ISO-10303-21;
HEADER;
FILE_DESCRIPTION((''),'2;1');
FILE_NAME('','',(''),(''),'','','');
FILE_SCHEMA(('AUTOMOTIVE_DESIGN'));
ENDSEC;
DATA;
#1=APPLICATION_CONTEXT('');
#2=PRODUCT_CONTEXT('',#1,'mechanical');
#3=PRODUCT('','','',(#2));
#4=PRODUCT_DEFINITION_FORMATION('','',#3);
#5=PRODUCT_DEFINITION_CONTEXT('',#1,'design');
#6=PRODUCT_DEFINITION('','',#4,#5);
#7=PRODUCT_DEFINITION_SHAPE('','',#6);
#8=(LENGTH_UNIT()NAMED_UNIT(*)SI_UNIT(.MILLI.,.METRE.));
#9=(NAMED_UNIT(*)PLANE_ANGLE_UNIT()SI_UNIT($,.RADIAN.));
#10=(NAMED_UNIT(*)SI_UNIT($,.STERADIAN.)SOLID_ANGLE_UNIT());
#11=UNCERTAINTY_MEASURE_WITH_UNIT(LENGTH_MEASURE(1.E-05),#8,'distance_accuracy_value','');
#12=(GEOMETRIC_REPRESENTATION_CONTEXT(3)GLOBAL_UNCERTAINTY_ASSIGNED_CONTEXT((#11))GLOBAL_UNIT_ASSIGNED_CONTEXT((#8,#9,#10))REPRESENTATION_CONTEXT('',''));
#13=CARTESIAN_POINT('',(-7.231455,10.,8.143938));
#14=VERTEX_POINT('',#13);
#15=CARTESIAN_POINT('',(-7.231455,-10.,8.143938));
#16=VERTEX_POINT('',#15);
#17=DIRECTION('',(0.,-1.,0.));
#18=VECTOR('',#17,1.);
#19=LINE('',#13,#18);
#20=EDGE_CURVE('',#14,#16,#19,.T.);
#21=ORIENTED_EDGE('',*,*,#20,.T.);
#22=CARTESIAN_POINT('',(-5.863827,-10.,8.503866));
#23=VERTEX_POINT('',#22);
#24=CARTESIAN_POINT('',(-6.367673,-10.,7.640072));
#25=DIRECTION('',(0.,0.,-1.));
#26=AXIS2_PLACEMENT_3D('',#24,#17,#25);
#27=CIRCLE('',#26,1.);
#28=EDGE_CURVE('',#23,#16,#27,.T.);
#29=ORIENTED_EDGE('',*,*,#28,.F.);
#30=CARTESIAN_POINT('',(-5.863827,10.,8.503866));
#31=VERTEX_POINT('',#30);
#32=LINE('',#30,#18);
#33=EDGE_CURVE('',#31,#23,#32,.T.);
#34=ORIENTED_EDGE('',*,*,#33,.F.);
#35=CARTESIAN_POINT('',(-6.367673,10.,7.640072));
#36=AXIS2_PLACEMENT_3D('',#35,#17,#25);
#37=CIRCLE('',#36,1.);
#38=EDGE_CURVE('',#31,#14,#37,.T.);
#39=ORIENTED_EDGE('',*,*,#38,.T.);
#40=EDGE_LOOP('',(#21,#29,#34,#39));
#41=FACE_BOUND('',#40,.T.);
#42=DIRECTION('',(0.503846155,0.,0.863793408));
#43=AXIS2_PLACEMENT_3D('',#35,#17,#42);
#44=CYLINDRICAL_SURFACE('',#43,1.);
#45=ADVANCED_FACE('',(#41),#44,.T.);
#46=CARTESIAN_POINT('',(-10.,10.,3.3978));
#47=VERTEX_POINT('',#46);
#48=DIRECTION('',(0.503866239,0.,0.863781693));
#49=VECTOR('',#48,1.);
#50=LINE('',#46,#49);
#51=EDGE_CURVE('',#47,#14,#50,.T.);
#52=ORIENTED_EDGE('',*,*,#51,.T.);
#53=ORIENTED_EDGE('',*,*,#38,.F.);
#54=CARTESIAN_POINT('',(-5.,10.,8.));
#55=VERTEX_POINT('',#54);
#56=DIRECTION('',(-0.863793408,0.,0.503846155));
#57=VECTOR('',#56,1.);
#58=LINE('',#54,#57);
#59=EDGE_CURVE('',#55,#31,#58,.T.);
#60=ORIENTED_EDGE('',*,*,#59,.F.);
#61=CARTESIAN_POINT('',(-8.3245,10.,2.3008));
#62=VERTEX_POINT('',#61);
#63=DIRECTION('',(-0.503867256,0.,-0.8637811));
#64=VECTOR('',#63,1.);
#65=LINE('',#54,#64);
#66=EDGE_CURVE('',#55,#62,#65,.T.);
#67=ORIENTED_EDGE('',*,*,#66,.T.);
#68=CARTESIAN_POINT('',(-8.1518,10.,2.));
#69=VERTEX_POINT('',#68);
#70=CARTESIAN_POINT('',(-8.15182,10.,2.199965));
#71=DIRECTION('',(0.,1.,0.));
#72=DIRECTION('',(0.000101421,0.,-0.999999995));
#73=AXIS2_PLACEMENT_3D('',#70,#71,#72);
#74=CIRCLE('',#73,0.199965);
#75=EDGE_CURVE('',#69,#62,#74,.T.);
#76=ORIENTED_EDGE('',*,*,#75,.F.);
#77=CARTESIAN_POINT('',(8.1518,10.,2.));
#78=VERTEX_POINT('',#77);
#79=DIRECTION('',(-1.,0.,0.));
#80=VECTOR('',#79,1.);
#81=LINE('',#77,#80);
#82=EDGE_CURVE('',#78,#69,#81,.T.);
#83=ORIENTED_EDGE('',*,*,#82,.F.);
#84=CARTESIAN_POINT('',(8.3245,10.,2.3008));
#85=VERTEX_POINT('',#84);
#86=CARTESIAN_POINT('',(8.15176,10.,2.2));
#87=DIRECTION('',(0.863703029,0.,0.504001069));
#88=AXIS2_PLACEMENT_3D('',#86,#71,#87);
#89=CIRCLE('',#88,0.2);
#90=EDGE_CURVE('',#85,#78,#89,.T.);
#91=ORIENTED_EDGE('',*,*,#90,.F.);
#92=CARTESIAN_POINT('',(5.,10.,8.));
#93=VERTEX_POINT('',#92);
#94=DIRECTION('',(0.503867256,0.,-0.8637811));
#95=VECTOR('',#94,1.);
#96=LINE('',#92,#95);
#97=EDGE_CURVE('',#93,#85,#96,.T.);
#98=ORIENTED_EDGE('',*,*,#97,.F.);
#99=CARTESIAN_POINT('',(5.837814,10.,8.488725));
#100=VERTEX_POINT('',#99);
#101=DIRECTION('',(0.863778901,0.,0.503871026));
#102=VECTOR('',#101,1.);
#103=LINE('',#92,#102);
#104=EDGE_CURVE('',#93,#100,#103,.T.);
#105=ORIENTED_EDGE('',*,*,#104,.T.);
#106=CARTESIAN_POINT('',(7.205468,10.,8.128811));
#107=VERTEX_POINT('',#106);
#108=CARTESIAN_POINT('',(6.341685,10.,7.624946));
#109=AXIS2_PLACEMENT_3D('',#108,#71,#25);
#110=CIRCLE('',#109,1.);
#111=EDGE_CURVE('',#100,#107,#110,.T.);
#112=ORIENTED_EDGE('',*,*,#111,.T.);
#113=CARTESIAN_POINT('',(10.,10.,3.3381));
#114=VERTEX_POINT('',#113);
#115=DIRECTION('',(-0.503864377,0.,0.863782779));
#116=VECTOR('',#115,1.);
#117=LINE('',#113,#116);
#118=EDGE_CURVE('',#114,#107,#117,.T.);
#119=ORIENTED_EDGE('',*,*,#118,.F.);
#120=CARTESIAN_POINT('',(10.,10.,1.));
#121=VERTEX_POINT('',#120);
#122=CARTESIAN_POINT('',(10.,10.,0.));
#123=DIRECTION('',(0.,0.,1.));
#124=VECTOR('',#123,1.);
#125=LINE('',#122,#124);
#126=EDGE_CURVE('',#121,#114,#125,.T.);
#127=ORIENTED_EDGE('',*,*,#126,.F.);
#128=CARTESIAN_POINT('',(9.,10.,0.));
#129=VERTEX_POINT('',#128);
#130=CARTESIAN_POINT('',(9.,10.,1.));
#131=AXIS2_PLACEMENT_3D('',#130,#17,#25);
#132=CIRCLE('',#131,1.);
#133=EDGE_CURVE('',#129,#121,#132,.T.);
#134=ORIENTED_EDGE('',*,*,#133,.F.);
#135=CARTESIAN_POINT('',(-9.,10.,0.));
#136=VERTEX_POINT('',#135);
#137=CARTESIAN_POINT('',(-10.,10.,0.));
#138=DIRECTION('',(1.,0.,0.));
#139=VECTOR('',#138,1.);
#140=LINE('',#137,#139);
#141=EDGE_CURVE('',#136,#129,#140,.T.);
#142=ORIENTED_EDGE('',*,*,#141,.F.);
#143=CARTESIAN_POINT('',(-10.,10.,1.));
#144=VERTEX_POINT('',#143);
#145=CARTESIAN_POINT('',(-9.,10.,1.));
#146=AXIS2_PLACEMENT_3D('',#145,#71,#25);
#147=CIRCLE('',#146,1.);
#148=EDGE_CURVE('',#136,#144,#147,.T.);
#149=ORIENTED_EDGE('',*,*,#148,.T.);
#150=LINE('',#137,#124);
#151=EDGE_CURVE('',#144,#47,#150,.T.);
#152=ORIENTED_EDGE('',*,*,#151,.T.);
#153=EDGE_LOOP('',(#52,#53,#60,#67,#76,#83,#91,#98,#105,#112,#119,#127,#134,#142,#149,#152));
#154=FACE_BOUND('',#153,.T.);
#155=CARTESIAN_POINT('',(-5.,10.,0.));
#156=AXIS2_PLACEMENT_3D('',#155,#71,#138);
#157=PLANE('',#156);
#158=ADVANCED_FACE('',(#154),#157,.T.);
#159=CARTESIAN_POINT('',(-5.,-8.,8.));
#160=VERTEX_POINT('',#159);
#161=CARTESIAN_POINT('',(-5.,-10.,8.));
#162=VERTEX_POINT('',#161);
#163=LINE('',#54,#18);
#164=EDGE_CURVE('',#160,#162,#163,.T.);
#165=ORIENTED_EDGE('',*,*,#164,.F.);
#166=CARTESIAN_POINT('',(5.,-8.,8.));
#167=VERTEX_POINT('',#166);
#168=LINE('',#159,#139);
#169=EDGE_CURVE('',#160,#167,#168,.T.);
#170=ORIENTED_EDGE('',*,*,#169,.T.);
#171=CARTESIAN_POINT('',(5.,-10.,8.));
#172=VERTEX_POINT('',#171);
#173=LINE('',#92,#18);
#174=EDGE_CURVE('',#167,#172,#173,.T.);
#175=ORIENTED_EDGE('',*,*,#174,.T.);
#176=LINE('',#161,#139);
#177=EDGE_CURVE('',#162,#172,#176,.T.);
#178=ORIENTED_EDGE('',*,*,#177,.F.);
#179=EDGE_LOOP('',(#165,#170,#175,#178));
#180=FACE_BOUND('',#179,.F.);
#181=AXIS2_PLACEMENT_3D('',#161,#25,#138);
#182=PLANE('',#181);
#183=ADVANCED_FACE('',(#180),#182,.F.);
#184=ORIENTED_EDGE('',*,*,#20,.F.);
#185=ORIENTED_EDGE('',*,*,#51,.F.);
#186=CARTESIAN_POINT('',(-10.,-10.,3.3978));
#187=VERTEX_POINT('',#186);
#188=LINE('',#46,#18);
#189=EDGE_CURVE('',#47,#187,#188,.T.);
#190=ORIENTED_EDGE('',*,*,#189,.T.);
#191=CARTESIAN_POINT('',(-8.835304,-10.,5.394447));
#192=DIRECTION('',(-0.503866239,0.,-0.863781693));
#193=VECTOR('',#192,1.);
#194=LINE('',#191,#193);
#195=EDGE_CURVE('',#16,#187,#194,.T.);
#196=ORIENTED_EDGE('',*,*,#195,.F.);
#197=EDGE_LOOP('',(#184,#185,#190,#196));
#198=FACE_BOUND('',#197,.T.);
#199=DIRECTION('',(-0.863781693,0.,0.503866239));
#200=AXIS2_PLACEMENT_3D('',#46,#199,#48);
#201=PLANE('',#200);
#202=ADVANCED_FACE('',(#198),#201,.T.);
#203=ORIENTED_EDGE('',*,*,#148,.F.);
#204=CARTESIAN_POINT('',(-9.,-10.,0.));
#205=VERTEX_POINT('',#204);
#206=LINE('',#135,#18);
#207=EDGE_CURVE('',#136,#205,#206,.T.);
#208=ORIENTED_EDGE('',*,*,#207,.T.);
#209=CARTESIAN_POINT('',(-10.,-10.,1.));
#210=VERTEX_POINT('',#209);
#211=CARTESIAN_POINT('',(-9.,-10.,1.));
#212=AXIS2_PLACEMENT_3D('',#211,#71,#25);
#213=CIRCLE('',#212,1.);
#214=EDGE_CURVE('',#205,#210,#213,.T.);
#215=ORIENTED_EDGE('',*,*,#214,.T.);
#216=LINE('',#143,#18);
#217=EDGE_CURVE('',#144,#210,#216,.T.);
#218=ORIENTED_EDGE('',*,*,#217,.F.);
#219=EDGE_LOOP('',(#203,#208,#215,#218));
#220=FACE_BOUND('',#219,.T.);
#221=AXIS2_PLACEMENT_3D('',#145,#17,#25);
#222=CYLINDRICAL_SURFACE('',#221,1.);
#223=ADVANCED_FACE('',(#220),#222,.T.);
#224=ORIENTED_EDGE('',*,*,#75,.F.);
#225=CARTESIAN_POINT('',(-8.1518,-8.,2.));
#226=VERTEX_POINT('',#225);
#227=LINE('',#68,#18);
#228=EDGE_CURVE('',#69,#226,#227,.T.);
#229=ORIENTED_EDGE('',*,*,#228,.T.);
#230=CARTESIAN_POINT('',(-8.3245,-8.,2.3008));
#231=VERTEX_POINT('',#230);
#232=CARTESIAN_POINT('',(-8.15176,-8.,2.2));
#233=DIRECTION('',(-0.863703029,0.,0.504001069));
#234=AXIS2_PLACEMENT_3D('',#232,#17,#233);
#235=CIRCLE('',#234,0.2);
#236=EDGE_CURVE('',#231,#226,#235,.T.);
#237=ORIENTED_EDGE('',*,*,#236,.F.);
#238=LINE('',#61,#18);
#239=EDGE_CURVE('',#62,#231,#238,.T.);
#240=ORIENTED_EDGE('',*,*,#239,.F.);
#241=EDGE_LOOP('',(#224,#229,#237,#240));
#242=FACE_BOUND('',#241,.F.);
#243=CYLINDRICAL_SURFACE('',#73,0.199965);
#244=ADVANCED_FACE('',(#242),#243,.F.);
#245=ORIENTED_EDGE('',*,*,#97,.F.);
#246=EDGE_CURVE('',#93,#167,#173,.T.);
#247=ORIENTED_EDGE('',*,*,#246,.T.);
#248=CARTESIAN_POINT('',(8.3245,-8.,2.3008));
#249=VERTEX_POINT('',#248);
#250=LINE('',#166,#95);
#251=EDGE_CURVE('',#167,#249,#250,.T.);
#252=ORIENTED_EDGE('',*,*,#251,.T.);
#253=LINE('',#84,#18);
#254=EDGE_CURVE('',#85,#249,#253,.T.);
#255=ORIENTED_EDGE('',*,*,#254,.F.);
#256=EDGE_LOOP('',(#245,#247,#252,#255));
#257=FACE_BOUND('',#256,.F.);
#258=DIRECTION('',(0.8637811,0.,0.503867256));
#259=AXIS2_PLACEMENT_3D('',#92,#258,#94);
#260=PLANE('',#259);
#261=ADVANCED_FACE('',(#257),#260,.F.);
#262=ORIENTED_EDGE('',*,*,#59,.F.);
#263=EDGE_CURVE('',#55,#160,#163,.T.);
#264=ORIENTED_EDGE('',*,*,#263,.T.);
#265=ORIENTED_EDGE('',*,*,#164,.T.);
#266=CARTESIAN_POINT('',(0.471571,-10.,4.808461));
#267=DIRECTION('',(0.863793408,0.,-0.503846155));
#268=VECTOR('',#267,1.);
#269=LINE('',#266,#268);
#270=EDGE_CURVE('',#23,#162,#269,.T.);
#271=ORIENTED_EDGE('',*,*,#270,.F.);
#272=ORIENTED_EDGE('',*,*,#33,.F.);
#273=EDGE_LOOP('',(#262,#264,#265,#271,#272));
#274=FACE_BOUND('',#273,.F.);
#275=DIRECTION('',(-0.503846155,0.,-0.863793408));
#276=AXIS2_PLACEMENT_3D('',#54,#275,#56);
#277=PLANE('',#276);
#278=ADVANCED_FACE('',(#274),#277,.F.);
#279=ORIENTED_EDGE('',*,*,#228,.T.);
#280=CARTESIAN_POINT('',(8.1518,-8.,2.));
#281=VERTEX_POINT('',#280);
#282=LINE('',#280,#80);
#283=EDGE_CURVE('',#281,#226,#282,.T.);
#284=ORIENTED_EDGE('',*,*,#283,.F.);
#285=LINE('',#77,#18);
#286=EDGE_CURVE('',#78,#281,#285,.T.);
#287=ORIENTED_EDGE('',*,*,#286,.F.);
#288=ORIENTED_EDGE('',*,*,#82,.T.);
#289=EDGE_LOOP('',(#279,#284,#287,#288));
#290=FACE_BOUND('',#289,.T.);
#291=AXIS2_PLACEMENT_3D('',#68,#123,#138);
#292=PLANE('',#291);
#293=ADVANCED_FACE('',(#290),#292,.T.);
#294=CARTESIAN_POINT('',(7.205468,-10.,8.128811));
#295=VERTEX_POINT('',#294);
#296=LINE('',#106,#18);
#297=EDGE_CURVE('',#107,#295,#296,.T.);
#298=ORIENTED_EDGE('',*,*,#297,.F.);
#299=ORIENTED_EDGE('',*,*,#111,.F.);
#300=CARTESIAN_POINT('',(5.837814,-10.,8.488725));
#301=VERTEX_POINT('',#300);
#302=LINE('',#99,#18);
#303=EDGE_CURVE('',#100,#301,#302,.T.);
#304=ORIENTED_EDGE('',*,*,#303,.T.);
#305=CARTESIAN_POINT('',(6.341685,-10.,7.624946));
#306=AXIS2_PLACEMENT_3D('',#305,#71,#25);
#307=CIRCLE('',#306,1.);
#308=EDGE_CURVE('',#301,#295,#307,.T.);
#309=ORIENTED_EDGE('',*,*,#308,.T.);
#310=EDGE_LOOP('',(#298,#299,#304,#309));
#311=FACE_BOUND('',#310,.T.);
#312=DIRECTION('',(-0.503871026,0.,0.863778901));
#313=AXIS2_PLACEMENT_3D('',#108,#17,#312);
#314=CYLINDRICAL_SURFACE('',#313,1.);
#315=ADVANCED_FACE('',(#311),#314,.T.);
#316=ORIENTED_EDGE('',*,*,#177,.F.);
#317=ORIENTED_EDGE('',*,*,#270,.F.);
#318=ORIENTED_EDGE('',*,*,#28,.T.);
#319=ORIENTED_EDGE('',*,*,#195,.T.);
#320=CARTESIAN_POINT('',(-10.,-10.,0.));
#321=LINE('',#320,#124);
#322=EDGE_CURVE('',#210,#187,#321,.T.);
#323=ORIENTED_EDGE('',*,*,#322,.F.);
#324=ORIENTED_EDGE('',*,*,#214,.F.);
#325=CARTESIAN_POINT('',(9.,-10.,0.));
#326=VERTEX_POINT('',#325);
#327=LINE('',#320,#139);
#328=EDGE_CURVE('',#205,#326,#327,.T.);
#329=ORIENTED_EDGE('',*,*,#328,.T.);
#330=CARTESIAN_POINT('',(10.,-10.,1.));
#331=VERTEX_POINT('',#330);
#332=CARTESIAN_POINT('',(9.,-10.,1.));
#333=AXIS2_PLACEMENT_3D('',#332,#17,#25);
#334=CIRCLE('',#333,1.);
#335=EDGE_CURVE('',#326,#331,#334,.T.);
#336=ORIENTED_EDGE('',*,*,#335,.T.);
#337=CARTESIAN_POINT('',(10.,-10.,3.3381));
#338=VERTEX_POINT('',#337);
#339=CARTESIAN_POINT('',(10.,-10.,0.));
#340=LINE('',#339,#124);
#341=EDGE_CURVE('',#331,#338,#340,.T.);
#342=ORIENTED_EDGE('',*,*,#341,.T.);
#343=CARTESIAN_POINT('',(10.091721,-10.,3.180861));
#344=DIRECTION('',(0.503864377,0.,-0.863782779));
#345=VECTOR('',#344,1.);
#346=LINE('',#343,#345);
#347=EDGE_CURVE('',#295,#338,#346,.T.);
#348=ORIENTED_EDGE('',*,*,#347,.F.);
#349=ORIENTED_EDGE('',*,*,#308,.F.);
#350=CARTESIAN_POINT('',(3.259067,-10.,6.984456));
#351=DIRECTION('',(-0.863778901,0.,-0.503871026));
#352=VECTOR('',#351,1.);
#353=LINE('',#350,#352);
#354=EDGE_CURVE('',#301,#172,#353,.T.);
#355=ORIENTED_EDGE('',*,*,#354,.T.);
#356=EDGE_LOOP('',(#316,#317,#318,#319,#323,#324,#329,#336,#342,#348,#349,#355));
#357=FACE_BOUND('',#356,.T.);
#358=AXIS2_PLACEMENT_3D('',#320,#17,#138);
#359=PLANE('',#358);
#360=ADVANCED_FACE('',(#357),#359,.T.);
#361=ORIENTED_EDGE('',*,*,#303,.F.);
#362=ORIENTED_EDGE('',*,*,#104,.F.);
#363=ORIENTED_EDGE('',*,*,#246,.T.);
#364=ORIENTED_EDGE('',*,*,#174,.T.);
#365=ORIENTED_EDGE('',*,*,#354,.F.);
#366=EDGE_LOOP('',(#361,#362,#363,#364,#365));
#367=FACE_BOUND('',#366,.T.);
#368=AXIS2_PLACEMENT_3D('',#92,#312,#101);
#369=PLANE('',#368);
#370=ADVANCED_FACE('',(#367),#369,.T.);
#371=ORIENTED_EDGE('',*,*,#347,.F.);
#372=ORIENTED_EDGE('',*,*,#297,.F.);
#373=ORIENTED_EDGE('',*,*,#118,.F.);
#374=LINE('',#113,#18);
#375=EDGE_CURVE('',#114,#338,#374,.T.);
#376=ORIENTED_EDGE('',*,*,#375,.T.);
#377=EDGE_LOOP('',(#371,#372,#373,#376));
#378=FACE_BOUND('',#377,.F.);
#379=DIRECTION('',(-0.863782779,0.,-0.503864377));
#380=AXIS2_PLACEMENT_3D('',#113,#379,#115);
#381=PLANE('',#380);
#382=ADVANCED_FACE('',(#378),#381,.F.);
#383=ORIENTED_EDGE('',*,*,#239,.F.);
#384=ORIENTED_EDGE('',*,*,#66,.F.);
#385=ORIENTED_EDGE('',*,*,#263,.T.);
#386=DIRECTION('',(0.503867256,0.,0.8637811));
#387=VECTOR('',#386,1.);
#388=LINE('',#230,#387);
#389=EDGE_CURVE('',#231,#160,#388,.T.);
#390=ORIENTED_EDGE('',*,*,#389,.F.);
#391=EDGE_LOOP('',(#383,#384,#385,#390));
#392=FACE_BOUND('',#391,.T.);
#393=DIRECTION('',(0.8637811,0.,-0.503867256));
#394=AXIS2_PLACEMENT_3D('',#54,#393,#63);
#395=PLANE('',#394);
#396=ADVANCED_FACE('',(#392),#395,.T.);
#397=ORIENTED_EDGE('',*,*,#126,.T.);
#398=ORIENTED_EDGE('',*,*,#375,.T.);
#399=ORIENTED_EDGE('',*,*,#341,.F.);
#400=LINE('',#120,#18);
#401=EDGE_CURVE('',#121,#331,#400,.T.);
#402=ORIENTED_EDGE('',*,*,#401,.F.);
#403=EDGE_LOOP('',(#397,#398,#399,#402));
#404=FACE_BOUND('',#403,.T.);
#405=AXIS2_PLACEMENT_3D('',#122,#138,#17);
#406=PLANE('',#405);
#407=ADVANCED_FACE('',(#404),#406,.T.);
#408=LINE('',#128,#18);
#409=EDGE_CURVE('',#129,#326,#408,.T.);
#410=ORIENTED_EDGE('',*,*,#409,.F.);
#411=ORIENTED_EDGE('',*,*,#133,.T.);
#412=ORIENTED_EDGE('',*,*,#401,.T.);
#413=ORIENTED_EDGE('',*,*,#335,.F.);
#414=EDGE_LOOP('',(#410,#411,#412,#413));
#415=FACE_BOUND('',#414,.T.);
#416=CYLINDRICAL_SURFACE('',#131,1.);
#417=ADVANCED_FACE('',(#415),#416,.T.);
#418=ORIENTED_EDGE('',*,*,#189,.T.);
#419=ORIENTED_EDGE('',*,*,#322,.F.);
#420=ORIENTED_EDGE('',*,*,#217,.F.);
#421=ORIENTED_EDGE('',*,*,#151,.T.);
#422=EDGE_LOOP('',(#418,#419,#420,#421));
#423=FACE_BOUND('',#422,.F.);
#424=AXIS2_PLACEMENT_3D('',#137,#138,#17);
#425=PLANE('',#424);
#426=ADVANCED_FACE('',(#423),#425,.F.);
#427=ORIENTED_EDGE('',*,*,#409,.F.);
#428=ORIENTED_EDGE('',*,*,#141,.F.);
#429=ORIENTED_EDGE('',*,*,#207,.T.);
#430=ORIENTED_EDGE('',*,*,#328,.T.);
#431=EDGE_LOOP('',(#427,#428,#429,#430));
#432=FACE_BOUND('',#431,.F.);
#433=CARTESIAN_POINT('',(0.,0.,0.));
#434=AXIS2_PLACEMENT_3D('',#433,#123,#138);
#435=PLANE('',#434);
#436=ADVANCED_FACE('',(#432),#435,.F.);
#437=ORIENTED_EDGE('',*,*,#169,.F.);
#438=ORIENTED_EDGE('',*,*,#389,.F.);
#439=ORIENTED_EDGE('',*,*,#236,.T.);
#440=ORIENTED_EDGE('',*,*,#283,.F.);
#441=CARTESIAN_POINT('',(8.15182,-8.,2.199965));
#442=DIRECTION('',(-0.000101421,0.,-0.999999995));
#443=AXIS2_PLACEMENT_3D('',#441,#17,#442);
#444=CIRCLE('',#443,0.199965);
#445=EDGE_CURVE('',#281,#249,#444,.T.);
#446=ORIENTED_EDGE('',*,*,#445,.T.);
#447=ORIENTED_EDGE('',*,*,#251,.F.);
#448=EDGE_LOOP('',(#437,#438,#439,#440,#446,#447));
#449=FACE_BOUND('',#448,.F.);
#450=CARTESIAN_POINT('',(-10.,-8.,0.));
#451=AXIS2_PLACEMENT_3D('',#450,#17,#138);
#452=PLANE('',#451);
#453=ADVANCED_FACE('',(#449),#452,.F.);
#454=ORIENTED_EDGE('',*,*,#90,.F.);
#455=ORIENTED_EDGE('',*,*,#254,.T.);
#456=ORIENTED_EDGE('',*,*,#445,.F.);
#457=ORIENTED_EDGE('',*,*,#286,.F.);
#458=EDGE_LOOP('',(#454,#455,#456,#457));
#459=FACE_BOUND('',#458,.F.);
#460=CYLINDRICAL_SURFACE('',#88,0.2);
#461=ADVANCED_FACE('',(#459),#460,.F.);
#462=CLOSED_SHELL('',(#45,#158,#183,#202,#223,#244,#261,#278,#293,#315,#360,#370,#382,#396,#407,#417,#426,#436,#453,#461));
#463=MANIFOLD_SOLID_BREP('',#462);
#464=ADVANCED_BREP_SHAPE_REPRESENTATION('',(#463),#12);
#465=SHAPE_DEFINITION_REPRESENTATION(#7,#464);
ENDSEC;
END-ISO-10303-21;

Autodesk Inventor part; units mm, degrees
ref_plane "YZ Plane" through (0, 0, 0) normal (1, 0, 0) x (0, 1, 0)
ref_plane "XZ Plane" through (0, 0, 0) normal (0, 1, 0) x (-1, 0, 0)
ref_plane "XY Plane" through (0, 0, 0) normal (0, 0, 1) x (1, 0, 0)
sketch "Sketch1" plane through (0, 0, 0) normal (0, 0, 1) x (1, 0, 0)
  line L0 (5, -10) -> (-5, -10)
  line L1 (-5, -10) -> (-5, 10)
  line L2 (-5, 10) -> (5, 10)
  line L3 (5, 10) -> (5, -10)
  line L4 (5, -10) -> (-5, 10) construction
  line L5 (-5, -10) -> (5, 10) construction
  point P0 (0, 0)
  dimension "d0" = 10
  dimension "d1" = 20
extrude "Extrusion1" add sketch "Sketch1" along normal blind 2
sketch "Sketch2" plane through (0, 0, 0) normal (0, 0, -1) x (-1, 0, 0)
  line L0 (-5, -10) -> (5, -10) construction
  line L1 (5, -10) -> (5, 10) construction
  line L2 (5, 10) -> (-5, 10) construction
  line L3 (-5, 10) -> (-5, -10) construction
  line L4 (-5, -10) -> (-5, 10) projected
  line L5 (-5, 10) -> (-10, 10)
  line L6 (-10, 10) -> (-10, -10)
  line L7 (-10, -10) -> (-5, -10)
  line L8 (-5, -10) -> (-5, 10)
  line L9 (5, 10) -> (5, -10) projected
  line L10 (5, 10) -> (10, 10)
  line L11 (10, 10) -> (10, -10)
  line L12 (10, -10) -> (5, -10)
  line L13 (5, -10) -> (5, 10)
  line L14 (5, -10) -> (-5, -10) projected
  point P0 (0, 0)
  dimension "d4" = 5
  dimension "d5" = 5
extrude "Extrusion2" add sketch "Sketch2" against normal blind 10
sketch "Sketch3" plane through (-10, 10, 0) normal (0, 1, 0) x (1, 0, 0)
  line L0 (0, 0) -> (20, 0) construction
  line L1 (0, 0) -> (0, -10) construction
  line L2 (5, -10) -> (0, -10) construction
  line L3 (5, -2) -> (5, -10) construction
  line L4 (15, -2) -> (5, -2) construction
  line L5 (15, -2) -> (15, -10) construction
  line L6 (20, -10) -> (15, -10) construction
  line L7 (20, 0) -> (20, -10) construction
  line L8 (5, -8) -> (1.6755, -2.3008)
  line L9 (1.8482, -2) -> (5, -2)
  line L10 (15, -8) -> (18.3245, -2.3008)
  line L11 (18.1518, -2) -> (15, -2)
  arc A0 (1.8482, -2) -> (1.6755, -2.3008) centre (1.8482, -2.2) ccw
  arc A1 (18.3245, -2.3008) -> (18.1518, -2) centre (18.1518, -2.2) ccw
  line L12 (5, -2) -> (5, -10) projected
  line L13 (5, -8) -> (5, -2)
  line L14 (15, -2) -> (15, -8)
  line L15 (15, -2) -> (15, -10) projected
  point P0 (10, 0)
  point P1 (1.5, -2)
  point P2 (18.5, -2)
  dimension "d9" = 2
  dimension "d10" = 3.5
  dimension "d11" = 3.5
  dimension "d12" = 2
  dimension "d13" = 0.2
extrude "Extrusion3" cut sketch "Sketch3" against normal through all
sketch "Sketch4" plane through (-10, 10, 0) normal (0, 1, 0) x (1, 0, 0)
  line L0 (0, -3.3978) -> (3.2724, -9.0077)
  line L1 (5, -10) -> (0, -10) projected
  line L2 (5, -8) -> (1.6755, -2.3008) projected
  line L3 (1.8482, -2) -> (18.1518, -2) projected
  line L4 (0, 0) -> (20, 0) projected
  line L5 (0, 0) -> (0, -10) projected
  line L6 (0, -3.3978) -> (0, -10)
  line L7 (20, -3.3381) -> (16.7016, -8.9926)
  line L8 (20, -10) -> (15, -10) projected
  line L9 (18.3245, -2.3008) -> (15, -8) projected
  line L10 (20, 0) -> (20, -10) projected
  line L11 (20, -3.3381) -> (20, -10)
  line L12 (5, -8) -> (3.2724, -9.0077)
  line L13 (15, -8) -> (15, -10) projected
  line L14 (15, -8) -> (16.7016, -8.9926)
  line L15 (5, -8) -> (5, -10) projected
  line L16 (5, -8) -> (5, -10)
  point P0 (10, 0)
  dimension "d16" = 2
  dimension "d17" = 2
extrude "Extrusion4" cut sketch "Sketch4" against normal through all
sketch "Sketch6" plane through (-10, -10, 0) normal (0, -1, 0) x (1, 0, 0)
  line L0 (1.6755, 2.3008) -> (5, 8) projected
  line L1 (18.1518, 2) -> (1.8482, 2) projected
  line L2 (15, 8) -> (18.3245, 2.3008) projected
  arc A0 (18.1518, 2) -> (18.3245, 2.3008) centre (18.1518, 2.2) ccw projected
  arc A1 (1.6755, 2.3008) -> (1.8482, 2) centre (1.8482, 2.2) ccw projected
  line L3 (3.2724, 9.0077) -> (5, 8) projected
  line L4 (5, 8) -> (15, 8)
  point P0 (10, 0)
extrude "Extrusion6" add sketch "Sketch6" against normal blind 2
fillet "Fillet1" [suppressed]
fillet "Fillet2" radius 1 4 edges at (6.7016, 0, 8.9926) (-10, 0, 0) (10, 0, 0) (-6.7276, 0, 9.0077)
equation "\"d11\" = d10"
equation "\"d12\" = d9"
properties part number "rail"
